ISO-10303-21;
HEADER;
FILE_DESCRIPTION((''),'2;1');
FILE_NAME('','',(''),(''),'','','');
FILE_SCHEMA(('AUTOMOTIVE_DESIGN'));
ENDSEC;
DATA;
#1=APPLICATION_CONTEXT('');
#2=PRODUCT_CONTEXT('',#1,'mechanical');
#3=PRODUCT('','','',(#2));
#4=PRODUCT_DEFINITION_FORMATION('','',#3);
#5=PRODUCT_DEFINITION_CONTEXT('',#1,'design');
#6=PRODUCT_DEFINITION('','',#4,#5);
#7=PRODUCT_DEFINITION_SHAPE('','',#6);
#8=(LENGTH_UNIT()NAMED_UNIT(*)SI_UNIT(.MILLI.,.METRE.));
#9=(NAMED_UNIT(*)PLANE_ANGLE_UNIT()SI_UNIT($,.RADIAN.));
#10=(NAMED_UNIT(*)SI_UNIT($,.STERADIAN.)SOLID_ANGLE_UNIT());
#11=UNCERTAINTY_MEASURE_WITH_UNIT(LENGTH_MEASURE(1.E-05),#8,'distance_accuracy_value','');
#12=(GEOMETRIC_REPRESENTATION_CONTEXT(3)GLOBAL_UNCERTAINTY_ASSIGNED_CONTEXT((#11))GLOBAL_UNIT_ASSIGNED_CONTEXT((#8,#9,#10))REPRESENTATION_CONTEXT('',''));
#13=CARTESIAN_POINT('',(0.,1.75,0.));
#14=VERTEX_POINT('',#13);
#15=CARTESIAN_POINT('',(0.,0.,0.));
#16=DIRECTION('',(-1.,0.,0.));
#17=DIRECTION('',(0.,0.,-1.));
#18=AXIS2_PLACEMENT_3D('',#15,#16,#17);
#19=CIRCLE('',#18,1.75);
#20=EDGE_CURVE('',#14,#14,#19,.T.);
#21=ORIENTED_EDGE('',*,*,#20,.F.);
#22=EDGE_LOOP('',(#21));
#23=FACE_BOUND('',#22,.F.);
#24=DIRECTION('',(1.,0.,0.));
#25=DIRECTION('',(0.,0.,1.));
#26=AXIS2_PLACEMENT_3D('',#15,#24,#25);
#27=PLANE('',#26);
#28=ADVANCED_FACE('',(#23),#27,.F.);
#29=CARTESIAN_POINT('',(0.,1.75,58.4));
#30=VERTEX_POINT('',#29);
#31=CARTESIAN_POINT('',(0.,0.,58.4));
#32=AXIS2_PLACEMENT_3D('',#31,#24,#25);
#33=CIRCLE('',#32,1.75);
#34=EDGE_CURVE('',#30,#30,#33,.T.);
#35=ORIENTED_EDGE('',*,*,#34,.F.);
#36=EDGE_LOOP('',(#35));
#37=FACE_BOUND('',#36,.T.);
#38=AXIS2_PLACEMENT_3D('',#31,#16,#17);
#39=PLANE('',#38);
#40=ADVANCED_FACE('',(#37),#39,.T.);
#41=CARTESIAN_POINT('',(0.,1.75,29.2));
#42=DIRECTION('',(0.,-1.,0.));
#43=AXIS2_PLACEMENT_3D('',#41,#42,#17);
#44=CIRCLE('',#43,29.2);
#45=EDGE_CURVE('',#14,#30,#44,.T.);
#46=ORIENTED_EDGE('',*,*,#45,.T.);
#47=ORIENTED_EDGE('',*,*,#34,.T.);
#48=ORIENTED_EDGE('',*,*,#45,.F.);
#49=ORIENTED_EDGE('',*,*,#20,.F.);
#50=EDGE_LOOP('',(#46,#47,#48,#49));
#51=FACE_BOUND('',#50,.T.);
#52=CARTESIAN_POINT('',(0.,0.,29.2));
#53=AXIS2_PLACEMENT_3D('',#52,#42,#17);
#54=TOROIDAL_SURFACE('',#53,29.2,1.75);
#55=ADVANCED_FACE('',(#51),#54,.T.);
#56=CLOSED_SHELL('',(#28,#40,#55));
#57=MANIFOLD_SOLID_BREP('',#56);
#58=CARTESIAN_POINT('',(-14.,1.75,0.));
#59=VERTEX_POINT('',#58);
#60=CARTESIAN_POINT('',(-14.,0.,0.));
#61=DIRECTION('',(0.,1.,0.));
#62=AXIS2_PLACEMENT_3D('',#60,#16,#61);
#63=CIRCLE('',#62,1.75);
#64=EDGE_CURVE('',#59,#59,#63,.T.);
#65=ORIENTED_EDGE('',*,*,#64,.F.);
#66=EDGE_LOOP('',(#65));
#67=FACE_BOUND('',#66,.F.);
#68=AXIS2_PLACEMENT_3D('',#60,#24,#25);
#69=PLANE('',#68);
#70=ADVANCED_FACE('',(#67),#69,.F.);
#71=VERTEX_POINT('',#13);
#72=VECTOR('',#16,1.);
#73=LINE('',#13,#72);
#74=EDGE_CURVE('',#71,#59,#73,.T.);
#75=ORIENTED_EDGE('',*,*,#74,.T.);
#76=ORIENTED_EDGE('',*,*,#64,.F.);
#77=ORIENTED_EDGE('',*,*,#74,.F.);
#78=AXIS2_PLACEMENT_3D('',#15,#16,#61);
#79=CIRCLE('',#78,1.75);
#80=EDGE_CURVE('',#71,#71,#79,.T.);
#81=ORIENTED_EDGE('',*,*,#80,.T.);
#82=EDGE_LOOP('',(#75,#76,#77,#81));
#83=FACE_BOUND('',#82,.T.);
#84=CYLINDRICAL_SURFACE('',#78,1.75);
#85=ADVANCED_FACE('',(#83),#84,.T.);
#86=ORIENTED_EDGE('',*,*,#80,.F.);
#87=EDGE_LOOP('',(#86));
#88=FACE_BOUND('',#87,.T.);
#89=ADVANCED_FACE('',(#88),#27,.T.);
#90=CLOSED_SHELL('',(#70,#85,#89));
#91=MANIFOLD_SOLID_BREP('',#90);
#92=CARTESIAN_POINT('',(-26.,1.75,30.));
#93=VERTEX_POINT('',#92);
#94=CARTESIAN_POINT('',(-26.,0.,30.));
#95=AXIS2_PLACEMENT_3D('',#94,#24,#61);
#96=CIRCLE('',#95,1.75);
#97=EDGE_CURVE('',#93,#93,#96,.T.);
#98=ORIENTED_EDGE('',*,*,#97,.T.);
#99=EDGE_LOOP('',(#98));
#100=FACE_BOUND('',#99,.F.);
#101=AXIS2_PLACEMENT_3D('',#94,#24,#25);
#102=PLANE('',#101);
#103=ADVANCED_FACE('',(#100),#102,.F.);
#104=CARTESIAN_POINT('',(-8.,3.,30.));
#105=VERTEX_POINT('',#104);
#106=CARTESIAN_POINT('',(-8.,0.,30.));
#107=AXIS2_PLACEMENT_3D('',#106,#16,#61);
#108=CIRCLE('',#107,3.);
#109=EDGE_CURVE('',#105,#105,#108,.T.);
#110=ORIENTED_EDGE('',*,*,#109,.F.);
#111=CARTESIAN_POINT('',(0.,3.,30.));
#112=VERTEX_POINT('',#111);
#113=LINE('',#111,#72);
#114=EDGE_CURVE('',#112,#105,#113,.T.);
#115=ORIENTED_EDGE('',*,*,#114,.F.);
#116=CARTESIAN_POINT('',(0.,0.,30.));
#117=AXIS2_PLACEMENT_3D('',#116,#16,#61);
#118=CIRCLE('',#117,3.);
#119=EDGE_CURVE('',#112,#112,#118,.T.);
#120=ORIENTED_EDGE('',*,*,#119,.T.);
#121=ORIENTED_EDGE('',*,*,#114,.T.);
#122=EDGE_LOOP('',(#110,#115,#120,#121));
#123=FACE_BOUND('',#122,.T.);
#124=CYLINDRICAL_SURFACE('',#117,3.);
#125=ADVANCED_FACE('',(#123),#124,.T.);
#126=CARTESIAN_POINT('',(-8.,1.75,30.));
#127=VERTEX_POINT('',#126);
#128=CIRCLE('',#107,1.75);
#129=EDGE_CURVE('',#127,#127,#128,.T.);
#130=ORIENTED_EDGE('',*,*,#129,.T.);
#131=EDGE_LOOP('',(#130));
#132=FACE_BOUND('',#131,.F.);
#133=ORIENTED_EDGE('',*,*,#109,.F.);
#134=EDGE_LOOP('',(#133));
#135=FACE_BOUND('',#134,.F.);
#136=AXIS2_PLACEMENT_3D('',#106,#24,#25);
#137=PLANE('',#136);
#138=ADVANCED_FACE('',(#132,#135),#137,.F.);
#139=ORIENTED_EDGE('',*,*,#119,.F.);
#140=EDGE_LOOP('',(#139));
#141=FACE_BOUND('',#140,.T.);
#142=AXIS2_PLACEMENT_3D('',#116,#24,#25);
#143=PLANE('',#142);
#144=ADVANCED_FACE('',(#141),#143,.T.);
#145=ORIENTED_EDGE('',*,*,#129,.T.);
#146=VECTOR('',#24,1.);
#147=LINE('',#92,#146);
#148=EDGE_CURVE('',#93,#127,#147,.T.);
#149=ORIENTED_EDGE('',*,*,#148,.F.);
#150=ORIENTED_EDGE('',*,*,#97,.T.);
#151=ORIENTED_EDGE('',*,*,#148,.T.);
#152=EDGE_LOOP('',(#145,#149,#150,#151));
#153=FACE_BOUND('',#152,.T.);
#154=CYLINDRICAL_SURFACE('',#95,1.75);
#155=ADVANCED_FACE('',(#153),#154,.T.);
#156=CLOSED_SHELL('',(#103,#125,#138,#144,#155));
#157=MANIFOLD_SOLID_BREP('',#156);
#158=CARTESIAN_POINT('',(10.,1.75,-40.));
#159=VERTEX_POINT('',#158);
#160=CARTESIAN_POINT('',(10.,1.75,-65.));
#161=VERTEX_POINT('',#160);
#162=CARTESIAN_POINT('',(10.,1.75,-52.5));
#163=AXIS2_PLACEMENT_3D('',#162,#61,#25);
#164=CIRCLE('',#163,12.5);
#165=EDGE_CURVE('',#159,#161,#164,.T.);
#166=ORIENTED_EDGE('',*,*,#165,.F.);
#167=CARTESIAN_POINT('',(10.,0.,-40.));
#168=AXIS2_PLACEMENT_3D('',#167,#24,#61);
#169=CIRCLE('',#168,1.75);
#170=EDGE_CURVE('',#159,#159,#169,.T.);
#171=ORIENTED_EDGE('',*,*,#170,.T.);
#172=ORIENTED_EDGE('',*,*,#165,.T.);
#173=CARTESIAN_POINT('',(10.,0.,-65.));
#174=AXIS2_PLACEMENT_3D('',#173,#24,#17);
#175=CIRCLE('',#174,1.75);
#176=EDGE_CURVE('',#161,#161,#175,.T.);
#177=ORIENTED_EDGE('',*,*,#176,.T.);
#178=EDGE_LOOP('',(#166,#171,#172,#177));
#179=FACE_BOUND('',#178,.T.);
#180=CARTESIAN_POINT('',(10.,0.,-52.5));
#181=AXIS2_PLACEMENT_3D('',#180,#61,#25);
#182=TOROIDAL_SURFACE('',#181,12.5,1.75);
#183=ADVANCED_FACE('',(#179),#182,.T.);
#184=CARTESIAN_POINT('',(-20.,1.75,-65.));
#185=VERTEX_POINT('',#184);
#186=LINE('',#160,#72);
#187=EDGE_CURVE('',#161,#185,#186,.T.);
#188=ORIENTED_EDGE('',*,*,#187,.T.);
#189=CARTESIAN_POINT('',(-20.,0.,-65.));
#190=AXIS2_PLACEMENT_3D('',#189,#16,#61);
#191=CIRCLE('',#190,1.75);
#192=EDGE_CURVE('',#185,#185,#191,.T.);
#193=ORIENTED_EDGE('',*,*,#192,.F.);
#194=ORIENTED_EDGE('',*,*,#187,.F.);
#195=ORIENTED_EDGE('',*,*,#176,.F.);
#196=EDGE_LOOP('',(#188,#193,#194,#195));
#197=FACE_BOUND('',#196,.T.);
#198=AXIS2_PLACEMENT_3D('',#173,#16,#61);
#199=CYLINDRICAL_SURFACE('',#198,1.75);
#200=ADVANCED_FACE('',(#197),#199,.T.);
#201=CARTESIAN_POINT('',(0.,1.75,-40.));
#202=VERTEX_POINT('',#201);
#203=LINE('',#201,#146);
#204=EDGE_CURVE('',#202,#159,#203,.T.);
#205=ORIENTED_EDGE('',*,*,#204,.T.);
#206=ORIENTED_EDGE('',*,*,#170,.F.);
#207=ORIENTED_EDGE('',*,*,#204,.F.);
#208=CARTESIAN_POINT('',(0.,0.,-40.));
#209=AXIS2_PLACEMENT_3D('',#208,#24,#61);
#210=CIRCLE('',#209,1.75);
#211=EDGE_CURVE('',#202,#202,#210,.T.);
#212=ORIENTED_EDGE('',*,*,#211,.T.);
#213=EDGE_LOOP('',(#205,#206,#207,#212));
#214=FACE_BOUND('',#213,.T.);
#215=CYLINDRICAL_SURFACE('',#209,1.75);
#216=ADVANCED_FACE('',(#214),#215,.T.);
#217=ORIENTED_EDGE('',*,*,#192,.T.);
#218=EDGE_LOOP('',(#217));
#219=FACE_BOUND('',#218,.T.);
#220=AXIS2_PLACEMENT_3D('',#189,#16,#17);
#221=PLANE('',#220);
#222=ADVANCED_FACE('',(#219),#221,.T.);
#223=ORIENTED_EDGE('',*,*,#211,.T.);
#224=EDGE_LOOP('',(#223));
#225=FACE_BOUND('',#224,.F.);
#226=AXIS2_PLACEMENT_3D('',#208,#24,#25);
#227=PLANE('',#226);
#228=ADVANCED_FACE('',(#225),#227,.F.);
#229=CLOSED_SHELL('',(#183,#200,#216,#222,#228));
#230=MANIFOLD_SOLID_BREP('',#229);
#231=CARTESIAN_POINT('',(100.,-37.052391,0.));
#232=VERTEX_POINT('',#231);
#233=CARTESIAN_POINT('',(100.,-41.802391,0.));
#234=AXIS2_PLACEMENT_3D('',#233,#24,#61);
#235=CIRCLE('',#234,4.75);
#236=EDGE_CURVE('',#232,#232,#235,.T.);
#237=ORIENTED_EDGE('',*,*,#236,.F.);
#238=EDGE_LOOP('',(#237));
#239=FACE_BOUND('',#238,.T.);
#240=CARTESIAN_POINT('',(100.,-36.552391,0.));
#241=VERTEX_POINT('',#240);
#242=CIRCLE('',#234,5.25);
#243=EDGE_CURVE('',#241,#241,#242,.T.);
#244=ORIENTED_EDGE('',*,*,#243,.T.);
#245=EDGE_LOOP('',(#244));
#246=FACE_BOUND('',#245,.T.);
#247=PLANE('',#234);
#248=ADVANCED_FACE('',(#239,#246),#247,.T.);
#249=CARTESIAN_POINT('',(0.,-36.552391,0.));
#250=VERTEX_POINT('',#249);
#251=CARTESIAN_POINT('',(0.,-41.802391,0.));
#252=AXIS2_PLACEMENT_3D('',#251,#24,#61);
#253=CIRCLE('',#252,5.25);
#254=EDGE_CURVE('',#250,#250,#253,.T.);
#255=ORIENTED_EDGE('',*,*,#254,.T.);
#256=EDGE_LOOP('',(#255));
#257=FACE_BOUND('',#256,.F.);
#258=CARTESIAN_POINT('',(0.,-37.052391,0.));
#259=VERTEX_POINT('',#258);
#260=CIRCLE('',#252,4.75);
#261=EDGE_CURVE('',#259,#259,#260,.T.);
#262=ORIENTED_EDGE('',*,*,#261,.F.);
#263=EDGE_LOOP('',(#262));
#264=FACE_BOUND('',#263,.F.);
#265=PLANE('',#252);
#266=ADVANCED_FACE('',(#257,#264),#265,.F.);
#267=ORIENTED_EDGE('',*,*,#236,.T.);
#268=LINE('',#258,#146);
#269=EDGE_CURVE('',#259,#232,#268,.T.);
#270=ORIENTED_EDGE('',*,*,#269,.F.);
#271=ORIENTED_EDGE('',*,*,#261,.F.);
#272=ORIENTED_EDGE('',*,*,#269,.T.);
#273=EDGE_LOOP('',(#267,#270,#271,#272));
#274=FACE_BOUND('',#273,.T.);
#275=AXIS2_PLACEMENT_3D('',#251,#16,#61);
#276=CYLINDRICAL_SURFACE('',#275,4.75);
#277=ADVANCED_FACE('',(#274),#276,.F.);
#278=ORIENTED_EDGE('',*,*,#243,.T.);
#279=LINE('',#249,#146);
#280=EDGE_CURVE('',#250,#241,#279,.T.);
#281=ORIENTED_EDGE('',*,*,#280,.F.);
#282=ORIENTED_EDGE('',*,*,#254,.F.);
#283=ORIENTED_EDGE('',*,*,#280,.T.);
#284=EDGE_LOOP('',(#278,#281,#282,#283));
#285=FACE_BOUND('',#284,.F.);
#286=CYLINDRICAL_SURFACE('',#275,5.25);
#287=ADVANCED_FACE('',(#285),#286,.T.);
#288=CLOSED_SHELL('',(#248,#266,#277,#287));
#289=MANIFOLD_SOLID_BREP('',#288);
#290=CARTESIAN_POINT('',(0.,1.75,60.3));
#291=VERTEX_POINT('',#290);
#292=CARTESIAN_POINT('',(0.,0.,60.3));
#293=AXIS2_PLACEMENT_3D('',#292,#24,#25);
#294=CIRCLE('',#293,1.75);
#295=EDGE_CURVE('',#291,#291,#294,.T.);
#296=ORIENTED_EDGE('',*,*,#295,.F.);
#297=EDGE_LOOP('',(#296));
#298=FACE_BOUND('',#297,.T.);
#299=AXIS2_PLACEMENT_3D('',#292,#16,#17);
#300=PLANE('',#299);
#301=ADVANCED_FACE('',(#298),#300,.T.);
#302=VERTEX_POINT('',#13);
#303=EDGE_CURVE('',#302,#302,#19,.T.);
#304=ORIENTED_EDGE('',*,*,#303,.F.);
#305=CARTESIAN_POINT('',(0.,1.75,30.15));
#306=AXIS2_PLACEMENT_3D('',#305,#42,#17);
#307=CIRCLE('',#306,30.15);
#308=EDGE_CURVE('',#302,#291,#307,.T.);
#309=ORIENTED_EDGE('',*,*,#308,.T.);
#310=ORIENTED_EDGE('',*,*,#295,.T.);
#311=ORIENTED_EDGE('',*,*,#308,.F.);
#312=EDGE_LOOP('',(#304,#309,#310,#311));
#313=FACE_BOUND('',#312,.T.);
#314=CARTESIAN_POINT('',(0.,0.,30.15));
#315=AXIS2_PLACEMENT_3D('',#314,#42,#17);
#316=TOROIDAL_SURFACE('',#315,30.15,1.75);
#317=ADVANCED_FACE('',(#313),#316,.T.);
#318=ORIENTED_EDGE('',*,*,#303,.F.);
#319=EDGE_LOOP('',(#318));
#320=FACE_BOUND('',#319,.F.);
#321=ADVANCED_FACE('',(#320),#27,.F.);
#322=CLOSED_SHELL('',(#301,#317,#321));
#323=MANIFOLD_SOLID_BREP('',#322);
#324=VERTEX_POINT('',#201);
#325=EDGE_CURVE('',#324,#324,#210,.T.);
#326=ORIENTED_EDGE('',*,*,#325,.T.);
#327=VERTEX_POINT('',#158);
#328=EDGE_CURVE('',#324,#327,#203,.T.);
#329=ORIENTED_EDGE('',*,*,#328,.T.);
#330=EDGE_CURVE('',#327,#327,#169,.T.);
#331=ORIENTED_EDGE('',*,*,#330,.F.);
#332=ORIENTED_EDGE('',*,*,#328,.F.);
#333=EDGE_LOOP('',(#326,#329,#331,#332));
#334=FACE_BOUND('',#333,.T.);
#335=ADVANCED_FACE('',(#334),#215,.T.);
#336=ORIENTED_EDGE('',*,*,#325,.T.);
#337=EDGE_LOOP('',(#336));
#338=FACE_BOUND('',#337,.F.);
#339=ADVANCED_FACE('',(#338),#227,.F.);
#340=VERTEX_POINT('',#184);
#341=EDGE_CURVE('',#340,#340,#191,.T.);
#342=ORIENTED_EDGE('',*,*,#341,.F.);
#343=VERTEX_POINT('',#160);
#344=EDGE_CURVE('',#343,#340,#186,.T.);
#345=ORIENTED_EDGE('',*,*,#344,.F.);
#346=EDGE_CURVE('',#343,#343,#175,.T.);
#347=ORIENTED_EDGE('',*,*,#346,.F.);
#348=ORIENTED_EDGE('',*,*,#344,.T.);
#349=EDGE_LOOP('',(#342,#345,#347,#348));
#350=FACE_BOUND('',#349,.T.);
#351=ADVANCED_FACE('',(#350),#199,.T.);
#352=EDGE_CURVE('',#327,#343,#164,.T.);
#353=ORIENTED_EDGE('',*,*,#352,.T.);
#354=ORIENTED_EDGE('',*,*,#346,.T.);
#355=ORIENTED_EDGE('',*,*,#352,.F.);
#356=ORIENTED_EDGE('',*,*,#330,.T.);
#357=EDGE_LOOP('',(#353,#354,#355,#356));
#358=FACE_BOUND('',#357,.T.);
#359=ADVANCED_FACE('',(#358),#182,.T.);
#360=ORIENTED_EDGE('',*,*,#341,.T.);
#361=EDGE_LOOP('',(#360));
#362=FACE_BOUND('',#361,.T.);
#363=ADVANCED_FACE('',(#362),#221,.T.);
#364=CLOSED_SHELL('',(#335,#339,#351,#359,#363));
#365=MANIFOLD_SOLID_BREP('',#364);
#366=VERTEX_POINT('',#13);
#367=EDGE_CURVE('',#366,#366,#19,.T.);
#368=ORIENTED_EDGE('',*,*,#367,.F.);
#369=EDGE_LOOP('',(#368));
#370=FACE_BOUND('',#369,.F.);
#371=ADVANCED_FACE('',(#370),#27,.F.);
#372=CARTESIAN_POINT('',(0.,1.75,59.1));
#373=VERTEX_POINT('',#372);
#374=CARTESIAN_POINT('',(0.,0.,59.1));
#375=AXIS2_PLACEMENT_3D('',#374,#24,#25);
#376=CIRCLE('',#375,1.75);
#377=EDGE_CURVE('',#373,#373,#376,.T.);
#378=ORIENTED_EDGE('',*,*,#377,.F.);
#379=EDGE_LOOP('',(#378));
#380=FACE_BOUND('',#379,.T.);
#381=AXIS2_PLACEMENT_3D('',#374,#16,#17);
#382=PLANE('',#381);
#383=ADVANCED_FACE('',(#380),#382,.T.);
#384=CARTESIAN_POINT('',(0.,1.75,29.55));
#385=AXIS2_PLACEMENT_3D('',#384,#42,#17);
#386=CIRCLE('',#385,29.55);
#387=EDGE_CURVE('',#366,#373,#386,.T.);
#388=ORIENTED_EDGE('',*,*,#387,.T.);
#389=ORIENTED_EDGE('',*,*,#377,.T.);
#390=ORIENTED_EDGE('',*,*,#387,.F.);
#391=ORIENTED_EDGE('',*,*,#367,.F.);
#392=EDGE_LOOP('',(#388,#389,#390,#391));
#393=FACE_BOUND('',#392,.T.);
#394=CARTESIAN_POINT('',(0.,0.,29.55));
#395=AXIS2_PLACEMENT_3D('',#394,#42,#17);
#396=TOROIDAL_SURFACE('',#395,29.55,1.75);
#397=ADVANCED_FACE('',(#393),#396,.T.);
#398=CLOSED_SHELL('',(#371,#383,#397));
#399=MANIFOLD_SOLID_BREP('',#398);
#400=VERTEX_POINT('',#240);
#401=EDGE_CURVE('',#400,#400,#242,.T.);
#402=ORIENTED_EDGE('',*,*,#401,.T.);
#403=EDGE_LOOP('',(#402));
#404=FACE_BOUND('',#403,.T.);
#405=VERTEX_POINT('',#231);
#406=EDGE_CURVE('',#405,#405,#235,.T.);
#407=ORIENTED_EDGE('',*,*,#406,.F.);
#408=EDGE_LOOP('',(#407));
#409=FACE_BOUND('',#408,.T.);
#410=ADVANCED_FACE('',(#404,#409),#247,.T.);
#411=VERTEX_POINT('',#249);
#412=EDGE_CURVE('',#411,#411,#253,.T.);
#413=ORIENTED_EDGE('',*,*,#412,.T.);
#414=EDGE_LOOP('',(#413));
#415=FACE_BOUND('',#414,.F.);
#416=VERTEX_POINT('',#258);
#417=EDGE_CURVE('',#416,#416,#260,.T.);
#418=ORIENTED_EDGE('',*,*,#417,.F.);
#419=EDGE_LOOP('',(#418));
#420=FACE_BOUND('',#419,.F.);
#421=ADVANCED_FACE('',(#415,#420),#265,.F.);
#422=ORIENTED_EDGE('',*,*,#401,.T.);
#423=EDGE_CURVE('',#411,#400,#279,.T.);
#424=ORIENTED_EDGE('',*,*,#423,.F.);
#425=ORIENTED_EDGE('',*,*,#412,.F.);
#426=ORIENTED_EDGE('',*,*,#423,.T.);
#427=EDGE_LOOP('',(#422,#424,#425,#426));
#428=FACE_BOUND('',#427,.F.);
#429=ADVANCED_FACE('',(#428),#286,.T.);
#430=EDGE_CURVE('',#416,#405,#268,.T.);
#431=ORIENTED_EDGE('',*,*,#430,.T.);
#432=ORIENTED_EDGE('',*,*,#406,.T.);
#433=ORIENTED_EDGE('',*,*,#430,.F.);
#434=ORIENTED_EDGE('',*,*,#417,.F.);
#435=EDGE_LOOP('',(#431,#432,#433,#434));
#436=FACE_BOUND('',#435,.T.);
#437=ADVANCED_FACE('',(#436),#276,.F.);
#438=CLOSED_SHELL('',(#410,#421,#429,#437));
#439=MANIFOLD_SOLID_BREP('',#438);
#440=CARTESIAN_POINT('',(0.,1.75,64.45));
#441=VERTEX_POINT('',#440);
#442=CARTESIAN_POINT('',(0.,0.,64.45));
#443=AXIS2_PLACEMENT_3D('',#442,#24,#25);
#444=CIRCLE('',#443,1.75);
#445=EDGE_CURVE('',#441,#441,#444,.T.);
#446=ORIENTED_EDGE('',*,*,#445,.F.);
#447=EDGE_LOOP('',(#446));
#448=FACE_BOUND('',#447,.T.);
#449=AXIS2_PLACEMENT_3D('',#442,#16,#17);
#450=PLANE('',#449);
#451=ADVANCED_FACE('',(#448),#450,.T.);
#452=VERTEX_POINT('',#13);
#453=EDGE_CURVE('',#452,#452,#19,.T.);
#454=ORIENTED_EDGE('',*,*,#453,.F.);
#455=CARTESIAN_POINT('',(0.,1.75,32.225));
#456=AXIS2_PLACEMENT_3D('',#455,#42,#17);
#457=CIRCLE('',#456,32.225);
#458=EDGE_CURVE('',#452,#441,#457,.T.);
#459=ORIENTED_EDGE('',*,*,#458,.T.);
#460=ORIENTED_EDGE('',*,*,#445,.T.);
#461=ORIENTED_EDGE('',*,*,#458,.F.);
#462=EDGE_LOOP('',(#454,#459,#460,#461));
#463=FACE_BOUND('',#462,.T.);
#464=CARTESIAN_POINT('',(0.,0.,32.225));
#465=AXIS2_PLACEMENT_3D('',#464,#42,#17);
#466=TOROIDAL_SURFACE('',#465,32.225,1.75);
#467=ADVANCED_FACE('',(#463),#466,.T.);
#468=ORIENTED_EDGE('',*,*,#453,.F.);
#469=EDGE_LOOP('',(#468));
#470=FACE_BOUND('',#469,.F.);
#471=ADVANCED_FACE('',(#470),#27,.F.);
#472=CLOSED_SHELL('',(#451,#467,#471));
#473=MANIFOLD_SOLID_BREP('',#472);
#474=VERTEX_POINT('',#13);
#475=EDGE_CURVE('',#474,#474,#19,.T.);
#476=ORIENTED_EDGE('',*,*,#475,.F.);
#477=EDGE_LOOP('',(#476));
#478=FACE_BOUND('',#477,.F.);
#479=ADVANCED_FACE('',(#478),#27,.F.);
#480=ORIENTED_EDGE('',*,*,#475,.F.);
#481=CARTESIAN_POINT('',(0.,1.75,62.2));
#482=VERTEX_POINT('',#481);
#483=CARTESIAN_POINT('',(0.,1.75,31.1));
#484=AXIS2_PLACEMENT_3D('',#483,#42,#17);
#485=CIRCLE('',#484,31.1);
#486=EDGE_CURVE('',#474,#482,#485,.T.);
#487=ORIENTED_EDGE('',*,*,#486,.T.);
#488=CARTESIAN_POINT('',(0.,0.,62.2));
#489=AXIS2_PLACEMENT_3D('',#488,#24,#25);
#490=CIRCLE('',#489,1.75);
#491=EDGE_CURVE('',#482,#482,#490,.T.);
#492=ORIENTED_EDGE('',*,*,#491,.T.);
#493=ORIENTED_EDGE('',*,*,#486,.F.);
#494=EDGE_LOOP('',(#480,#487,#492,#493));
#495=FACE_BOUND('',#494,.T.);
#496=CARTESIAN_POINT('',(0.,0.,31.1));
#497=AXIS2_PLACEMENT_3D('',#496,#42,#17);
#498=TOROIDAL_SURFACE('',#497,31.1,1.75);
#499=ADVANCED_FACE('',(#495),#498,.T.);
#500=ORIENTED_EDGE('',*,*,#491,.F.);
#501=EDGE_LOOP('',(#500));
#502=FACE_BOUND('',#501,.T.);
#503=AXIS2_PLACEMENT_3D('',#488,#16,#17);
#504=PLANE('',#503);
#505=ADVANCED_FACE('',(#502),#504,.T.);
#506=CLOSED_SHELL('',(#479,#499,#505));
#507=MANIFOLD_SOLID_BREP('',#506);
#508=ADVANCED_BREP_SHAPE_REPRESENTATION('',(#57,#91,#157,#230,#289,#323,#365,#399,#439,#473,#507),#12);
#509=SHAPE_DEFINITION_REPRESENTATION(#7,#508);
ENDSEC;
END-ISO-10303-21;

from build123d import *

# Parameters (mm, degrees)
F1_R      = 3
F1_R_2    = 1.75
F1_R_3    = 5.25
F1_R_4    = 4.75
F10_DEPTH = 100
F13_DEPTH = 100


with BuildPart() as f2:
    # F2: sweep along a path in F0
    with BuildLine(Plane.XZ) as f2_path:
        Line((0, 30), (-8, 30))
    # F1 (on Right) → F2 (sweep)
    with BuildSketch(Plane.YZ):
        with Locations((0, 30)):
            Circle(F1_R)
        with Locations((0, 30)):
            Circle(F1_R_2, mode=Mode.SUBTRACT)
    sweep(path=f2_path.line)

    # F3: sweep along a path in F0
    with BuildLine(Plane.XZ) as f3_path:
        Line((-26, 30), (-8, 30))
        Line((-8, 30), (0, 30))
    # F1 (on Right) → F3 (sweep)
    with BuildSketch(Plane.YZ):
        with Locations((0, 30)):
            Circle(F1_R_2)
    sweep(path=f3_path.line)


with BuildPart() as f4:
    # F4: sweep along a path in F0
    with BuildLine(Plane.XZ) as f4_path:
        Line((0, 0), (-14, 0))
    # F1 (on Right) → F4 (sweep)
    with BuildSketch(Plane.YZ):
        Circle(F1_R_2)
    sweep(path=f4_path.line)


with BuildPart() as f5:
    # F5: sweep along a path in F0
    with BuildLine(Plane.XZ) as f5_path:
        ThreePointArc((0, 0), (31.1, 31.1), (0, 62.2))
    # F1 (on Right) → F5 (sweep)
    with BuildSketch(Plane.YZ):
        Circle(F1_R_2)
    sweep(path=f5_path.line)


with BuildPart() as f6:
    # F6: sweep along a path in F0
    with BuildLine(Plane.XZ) as f6_path:
        ThreePointArc((0, 0), (29.55, 29.55), (0, 59.1))
    # F1 (on Right) → F6 (sweep)
    with BuildSketch(Plane.YZ):
        Circle(F1_R_2)
    sweep(path=f6_path.line)


with BuildPart() as f7:
    # F7: sweep along a path in F0
    with BuildLine(Plane.XZ) as f7_path:
        ThreePointArc((0, 0), (29.2, 29.2), (0, 58.4))
    # F1 (on Right) → F7 (sweep)
    with BuildSketch(Plane.YZ):
        Circle(F1_R_2)
    sweep(path=f7_path.line)


with BuildPart() as f8:
    # F8: sweep along a path in F0
    with BuildLine(Plane.XZ) as f8_path:
        ThreePointArc((0, 0), (30.15, 30.15), (0, 60.3))
    # F1 (on Right) → F8 (sweep)
    with BuildSketch(Plane.YZ):
        Circle(F1_R_2)
    sweep(path=f8_path.line)


with BuildPart() as f9:
    # F9: sweep along a path in F0
    with BuildLine(Plane.XZ) as f9_path:
        ThreePointArc((0, 0), (32.225, 32.225), (0, 64.45))
    # F1 (on Right) → F9 (sweep)
    with BuildSketch(Plane.YZ):
        Circle(F1_R_2)
    sweep(path=f9_path.line)


with BuildPart() as f10:
    # F1 (on Right) → F10 (new body)
    with BuildSketch(Plane.YZ):
        with Locations((-41.8023914099, 0)):
            Circle(F1_R_3)
        with Locations((-41.8023914099, 0)):
            Circle(F1_R_4, mode=Mode.SUBTRACT)
    extrude(amount=F10_DEPTH)


with BuildPart() as f11:
    # F11: sweep along a path in F0
    with BuildLine(Plane.XZ) as f11_path:
        Line((0, -40), (10, -40))
        ThreePointArc((10, -40), (22.5, -52.5), (10, -65))
        Line((10, -65), (-20, -65))
    # F1 (on Right) → F11 (sweep)
    with BuildSketch(Plane.YZ):
        with Locations((0, -40)):
            Circle(F1_R_2)
    sweep(path=f11_path.line)


with BuildPart() as f12:
    # F12: sweep along a path in F0
    with BuildLine(Plane.XZ) as f12_path:
        Line((0, -40), (10, -40))
        ThreePointArc((10, -40), (22.5, -52.5), (10, -65))
        Line((10, -65), (-20, -65))
    # F1 (on Right) → F12 (sweep)
    with BuildSketch(Plane.YZ):
        with Locations((0, -40)):
            Circle(F1_R_2)
    sweep(path=f12_path.line)


with BuildPart() as f13:
    # F1 (on Right) → F13 (new body)
    with BuildSketch(Plane.YZ):
        with Locations((-41.8023914099, 0)):
            Circle(F1_R_3)
        with Locations((-41.8023914099, 0)):
            Circle(F1_R_4, mode=Mode.SUBTRACT)
    extrude(amount=F13_DEPTH)


solid = Compound([f2.part, f4.part, f5.part, f6.part, f7.part, f8.part, f9.part, f10.part, f11.part, f12.part, f13.part])
